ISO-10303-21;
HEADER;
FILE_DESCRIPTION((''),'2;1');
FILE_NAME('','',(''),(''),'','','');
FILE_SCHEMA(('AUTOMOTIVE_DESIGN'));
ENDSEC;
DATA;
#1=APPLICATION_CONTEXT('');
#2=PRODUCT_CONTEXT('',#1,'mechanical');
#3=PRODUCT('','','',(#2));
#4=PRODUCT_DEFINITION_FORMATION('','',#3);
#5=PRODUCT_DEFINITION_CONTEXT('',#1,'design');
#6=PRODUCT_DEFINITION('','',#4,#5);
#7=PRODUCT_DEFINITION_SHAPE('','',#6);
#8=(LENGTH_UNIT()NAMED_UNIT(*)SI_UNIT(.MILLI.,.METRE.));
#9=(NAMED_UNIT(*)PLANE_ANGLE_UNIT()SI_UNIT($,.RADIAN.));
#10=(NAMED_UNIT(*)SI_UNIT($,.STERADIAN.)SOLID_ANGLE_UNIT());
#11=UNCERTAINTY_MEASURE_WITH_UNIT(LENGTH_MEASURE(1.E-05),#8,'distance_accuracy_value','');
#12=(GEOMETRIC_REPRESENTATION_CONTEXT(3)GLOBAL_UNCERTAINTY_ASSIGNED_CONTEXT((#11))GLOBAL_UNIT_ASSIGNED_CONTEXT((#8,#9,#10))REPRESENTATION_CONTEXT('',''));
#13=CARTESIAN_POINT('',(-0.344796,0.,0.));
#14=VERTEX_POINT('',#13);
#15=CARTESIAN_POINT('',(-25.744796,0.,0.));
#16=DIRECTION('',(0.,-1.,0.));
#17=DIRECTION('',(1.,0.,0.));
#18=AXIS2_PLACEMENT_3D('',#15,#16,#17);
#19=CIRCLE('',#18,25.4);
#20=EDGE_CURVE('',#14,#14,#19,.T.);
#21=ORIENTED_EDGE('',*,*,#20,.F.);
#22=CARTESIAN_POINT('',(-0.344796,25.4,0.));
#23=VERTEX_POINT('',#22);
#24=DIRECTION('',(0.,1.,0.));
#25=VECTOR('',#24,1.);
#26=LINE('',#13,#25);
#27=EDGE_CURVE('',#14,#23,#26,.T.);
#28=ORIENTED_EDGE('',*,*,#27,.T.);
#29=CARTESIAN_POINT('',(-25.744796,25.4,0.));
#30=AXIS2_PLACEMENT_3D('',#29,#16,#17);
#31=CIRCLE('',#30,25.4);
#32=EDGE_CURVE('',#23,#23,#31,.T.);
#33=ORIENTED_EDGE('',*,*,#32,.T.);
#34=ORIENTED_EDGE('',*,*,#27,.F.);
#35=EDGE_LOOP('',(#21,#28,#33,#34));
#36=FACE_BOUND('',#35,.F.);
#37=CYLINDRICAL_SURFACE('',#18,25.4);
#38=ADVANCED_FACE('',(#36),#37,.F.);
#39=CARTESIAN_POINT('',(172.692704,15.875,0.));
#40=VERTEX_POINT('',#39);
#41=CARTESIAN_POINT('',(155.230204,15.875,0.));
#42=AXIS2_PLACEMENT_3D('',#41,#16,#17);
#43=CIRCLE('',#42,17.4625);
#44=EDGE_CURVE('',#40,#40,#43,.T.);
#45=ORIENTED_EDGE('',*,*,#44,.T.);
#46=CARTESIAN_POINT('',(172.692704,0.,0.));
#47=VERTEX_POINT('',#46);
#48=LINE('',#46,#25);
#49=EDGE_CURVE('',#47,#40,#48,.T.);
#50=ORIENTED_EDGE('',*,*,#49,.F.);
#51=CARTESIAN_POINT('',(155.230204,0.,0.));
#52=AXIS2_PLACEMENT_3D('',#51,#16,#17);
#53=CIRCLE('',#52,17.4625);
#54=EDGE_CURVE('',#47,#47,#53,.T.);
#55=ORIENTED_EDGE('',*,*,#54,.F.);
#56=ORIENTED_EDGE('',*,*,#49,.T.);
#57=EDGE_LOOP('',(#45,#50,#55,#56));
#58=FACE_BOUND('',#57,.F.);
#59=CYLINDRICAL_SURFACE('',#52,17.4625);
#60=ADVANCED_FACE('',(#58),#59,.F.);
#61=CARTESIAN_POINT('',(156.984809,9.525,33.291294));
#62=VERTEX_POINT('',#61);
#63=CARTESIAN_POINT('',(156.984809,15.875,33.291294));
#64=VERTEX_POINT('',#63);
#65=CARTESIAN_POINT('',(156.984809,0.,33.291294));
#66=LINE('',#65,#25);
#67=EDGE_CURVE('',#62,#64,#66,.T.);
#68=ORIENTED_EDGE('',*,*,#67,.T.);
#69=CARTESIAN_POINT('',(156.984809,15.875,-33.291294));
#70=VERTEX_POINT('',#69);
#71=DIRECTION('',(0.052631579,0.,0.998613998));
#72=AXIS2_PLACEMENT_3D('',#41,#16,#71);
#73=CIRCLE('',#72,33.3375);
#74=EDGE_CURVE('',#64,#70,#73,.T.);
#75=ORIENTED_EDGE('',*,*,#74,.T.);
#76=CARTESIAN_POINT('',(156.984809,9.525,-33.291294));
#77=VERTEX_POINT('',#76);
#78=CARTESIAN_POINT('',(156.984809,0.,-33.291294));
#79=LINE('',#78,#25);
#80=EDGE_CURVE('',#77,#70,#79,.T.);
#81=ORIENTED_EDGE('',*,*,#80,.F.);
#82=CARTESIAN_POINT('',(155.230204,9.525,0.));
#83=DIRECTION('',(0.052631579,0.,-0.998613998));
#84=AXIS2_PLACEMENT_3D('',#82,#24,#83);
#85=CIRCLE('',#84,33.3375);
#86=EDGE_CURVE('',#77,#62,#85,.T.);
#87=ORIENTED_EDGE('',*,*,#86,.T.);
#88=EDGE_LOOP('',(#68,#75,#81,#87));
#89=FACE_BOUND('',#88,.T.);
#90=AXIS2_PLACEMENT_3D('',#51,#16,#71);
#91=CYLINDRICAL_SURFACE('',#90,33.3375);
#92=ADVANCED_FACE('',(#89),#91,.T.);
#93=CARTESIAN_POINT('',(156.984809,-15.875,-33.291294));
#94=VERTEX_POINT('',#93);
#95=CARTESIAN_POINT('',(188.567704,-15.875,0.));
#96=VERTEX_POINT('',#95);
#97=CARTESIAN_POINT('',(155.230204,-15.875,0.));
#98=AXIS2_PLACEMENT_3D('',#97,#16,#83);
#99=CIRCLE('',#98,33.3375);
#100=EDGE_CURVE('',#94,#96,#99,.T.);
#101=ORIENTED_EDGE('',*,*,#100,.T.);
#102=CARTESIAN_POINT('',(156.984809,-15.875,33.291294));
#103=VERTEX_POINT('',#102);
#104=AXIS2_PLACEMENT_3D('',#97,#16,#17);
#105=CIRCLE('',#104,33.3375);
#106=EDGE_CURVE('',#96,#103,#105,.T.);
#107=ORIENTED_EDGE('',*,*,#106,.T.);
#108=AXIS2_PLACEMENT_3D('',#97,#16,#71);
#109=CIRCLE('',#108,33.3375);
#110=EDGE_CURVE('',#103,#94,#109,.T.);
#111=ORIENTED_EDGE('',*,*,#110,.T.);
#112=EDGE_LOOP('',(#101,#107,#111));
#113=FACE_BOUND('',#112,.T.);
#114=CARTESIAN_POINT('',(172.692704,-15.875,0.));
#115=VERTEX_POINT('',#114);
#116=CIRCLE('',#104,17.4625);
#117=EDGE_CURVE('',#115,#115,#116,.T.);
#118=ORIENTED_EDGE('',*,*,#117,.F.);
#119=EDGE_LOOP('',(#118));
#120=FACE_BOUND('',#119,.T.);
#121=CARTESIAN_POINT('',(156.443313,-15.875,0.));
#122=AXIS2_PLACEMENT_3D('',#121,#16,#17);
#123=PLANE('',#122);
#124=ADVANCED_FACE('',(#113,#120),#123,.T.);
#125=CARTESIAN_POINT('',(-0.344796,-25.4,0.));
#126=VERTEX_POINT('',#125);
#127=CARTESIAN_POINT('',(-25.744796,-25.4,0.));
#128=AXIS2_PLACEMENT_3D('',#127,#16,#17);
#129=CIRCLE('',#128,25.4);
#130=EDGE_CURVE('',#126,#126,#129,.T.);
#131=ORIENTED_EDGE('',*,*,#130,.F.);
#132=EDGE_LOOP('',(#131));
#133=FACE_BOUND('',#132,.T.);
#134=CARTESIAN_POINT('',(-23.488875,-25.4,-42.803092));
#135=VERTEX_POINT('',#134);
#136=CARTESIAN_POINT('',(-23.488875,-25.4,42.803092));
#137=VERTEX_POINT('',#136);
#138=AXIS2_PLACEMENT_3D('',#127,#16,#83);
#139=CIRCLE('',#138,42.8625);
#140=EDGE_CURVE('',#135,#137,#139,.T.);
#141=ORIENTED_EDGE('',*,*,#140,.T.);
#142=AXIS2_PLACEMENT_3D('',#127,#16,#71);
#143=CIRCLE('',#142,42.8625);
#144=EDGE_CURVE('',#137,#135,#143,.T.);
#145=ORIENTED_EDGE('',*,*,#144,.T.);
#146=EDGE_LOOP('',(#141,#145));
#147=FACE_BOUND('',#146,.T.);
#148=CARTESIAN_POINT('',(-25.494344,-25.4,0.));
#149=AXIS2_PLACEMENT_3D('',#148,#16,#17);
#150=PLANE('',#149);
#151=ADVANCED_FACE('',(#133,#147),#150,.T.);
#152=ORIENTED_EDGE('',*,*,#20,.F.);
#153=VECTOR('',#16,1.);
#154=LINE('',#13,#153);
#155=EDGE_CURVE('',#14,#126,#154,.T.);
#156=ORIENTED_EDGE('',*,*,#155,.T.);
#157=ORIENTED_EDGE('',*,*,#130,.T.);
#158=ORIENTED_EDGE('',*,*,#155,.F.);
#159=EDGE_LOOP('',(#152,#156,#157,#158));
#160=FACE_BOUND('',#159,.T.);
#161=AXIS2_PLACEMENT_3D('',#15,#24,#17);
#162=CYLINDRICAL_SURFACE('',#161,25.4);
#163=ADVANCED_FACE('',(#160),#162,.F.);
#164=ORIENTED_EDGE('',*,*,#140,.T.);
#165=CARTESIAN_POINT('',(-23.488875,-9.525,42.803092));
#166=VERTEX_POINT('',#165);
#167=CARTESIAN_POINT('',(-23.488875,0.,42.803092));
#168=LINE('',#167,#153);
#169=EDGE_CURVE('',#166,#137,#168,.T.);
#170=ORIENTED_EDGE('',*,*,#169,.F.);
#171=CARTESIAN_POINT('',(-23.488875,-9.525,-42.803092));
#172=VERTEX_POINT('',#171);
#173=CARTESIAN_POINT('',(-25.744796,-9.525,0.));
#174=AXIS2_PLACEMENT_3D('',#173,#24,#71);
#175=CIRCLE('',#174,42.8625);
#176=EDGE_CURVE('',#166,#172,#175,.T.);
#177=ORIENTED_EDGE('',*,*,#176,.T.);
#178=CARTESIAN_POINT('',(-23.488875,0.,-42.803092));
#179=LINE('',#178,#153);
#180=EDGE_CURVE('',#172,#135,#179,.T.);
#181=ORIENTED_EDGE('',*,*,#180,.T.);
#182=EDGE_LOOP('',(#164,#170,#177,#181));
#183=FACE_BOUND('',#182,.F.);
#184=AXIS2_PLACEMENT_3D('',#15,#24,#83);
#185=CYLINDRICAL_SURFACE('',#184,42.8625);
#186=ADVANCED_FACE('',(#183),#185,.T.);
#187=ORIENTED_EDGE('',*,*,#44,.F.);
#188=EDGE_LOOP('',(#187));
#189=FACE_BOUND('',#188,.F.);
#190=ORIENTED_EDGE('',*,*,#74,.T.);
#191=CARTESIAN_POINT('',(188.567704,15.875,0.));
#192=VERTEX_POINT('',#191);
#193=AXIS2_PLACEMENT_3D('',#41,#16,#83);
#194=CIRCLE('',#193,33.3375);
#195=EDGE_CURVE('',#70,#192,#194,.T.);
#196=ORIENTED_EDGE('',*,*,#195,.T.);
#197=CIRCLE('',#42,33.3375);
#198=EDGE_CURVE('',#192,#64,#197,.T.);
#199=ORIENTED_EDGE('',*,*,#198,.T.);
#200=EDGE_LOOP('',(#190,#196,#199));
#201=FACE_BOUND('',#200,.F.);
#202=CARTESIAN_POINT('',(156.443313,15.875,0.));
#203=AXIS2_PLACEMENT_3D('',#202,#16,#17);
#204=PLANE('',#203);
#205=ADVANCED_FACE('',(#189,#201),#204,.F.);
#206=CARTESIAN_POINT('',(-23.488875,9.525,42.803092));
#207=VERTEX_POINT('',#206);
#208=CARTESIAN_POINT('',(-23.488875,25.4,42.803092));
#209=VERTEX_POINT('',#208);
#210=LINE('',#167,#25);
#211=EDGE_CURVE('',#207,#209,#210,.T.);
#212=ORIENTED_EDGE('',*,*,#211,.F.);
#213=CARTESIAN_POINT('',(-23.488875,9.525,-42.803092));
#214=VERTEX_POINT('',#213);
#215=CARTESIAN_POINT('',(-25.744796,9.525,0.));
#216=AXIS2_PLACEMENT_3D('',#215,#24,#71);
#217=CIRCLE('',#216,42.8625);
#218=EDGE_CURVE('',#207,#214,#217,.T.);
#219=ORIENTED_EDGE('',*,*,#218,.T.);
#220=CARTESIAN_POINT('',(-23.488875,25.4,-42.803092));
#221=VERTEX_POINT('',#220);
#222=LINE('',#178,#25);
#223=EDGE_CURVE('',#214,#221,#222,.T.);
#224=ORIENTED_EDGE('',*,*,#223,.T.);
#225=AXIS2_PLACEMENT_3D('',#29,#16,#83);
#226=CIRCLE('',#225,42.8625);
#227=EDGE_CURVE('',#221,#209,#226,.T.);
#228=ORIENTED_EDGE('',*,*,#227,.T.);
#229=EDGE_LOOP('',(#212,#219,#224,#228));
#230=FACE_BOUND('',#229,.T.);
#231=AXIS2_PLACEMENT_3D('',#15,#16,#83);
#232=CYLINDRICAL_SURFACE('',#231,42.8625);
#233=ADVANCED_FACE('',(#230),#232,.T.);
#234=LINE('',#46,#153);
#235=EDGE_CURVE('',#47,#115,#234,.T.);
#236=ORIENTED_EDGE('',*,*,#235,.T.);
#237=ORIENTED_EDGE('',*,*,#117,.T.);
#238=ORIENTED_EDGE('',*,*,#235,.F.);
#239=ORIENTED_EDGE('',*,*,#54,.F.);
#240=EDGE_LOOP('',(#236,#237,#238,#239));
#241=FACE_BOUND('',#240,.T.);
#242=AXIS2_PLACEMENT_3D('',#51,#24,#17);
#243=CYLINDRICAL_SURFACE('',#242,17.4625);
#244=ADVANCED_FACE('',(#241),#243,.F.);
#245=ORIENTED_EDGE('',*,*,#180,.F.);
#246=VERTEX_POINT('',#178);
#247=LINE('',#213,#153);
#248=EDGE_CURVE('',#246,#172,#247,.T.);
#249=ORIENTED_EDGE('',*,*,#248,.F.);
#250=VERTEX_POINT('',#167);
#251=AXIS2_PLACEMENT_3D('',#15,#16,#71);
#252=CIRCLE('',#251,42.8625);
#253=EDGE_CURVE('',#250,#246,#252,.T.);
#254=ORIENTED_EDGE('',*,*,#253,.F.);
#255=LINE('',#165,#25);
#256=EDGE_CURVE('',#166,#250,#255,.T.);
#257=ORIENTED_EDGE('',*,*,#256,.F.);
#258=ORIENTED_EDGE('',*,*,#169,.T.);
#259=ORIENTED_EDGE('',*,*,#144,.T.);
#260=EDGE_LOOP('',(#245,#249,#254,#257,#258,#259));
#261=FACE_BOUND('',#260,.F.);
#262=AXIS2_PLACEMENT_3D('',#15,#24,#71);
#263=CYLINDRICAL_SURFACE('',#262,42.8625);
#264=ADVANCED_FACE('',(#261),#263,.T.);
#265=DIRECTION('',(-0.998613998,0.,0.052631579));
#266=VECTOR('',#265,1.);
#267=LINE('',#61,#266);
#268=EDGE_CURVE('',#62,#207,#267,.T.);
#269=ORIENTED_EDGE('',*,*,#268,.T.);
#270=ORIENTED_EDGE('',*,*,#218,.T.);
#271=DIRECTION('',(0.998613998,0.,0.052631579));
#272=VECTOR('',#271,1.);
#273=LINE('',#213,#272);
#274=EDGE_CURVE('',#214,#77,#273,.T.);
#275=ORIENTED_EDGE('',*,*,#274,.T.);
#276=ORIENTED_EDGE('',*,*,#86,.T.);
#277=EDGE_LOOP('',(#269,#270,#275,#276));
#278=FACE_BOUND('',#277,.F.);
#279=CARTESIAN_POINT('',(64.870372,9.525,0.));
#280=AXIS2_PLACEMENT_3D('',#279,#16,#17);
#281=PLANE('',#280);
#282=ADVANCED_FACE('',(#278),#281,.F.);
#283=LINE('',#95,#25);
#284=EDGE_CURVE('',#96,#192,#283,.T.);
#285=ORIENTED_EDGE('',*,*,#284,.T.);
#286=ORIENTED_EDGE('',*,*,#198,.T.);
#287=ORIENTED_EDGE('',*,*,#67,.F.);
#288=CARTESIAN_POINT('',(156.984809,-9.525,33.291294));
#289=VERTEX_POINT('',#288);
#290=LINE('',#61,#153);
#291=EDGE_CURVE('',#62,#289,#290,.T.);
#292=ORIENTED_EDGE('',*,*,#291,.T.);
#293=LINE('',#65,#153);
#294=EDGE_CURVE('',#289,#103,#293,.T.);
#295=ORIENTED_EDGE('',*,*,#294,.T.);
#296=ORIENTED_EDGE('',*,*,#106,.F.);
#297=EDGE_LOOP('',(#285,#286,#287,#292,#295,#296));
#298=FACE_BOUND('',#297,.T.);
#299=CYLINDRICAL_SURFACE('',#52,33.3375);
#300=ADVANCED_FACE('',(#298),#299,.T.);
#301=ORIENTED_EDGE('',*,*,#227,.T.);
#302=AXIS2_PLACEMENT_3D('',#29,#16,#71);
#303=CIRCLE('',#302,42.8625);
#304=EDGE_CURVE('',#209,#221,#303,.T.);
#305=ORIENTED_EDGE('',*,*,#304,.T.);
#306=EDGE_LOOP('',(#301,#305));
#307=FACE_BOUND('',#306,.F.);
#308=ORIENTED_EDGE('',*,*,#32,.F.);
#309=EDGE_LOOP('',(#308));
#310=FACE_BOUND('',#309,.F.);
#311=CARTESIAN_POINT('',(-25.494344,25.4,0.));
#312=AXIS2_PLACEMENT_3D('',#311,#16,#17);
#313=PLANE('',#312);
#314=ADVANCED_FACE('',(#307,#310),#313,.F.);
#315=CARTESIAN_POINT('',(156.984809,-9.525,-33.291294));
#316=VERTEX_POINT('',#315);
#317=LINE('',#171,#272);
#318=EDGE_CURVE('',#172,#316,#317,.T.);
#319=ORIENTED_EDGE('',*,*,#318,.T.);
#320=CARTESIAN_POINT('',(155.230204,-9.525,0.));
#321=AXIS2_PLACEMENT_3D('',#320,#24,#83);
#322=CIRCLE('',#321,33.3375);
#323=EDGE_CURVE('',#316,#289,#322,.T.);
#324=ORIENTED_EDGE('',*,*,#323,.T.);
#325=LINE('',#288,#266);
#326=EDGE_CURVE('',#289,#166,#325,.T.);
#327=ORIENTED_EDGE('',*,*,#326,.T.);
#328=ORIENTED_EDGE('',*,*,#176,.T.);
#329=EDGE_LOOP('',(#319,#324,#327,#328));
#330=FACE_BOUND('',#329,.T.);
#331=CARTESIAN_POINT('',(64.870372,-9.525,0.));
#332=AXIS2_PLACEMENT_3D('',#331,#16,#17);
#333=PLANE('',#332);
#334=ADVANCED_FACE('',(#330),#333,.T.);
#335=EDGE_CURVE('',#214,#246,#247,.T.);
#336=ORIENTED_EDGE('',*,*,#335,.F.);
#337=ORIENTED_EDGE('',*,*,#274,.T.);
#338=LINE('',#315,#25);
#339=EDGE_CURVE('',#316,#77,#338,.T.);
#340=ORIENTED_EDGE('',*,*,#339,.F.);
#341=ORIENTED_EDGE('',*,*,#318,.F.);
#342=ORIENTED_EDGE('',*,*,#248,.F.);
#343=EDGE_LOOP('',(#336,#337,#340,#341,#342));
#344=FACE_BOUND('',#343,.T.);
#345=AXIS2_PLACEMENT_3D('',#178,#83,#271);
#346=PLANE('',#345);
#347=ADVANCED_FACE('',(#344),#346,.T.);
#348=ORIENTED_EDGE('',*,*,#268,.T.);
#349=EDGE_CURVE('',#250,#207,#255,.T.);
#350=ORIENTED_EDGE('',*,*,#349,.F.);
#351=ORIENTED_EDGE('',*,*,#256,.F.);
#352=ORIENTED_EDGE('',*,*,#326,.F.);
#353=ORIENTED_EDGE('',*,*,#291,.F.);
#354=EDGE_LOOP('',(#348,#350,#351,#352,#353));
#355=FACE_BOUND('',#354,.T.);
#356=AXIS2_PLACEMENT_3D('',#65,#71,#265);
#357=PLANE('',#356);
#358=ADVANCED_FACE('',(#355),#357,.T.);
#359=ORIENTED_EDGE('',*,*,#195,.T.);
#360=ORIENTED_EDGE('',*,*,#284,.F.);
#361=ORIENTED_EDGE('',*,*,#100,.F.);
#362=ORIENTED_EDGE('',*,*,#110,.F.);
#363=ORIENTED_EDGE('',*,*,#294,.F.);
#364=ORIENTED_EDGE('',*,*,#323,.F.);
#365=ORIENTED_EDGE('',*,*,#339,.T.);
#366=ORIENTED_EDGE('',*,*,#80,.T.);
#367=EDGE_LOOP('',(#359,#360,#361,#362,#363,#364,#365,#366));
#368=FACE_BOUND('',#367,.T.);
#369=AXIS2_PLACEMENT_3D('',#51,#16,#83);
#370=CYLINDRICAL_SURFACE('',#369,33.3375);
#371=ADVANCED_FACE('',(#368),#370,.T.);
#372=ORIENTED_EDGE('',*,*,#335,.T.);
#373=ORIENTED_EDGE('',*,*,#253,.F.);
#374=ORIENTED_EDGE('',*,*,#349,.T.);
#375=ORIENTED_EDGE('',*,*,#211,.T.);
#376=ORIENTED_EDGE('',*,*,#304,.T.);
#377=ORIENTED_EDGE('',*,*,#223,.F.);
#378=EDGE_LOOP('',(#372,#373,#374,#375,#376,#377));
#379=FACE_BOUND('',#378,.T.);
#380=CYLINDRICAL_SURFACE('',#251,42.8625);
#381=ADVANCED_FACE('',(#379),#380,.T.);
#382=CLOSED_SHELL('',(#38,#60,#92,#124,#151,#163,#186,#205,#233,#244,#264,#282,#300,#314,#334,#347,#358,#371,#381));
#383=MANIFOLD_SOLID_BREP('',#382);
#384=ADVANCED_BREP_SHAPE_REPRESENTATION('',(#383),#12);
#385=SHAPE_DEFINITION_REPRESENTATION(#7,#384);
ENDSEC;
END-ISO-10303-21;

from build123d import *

# Parameters (mm, degrees)
F1_DEPTH = 9.525
F0_R     = 25.4
F2_DEPTH = 25.4
F0_R_2   = 17.4625
F3_DEPTH = 15.875


with BuildPart() as f1:
    # F0 (on Front) → F1 (new body, symmetric)
    with BuildSketch(Plane.XZ):
        with BuildLine():
            ThreePointArc((-23.4888751152, 42.803092487), (5.3509296025, 29.4999956791), (17.1177038322, 0))
            ThreePointArc((17.1177038322, 0), (5.3509296025, -29.4999956791), (-23.4888751152, -42.803092487))
            Line((-23.4888751152, -42.803092487), (156.9848090954, -33.2912941566))
            ThreePointArc((156.9848090954, -33.2912941566), (121.8927038322, 0), (156.9848090954, 33.2912941566))
            Line((156.9848090954, 33.2912941566), (-23.4888751152, 42.803092487))
        make_face()
    extrude(amount=F1_DEPTH, both=True)

    # F0 (on Front) → F2 (join, symmetric)
    with BuildSketch(Plane.XZ):
        with BuildLine():
            ThreePointArc((-23.4888751152, -42.803092487), (5.3509296025, -29.4999956791), (17.1177038322, 0))
            ThreePointArc((17.1177038322, 0), (5.3509296025, 29.4999956791), (-23.4888751152, 42.803092487))
            ThreePointArc((-23.4888751152, 42.803092487), (-68.6072961678, 0), (-23.4888751152, -42.803092487))
        make_face()
        with Locations((-25.7447961678, 0)):
            Circle(F0_R, mode=Mode.SUBTRACT)
    extrude(amount=F2_DEPTH, both=True)

    # F0 (on Front) → F3 (join, symmetric)
    with BuildSketch(Plane.XZ):
        with BuildLine():
            ThreePointArc((188.5677038322, 0), (179.4157683202, 22.9444410837), (156.9848090954, 33.2912941566))
            ThreePointArc((156.9848090954, 33.2912941566), (121.8927038322, 0), (156.9848090954, -33.2912941566))
            ThreePointArc((156.9848090954, -33.2912941566), (179.4157683202, -22.9444410837), (188.5677038322, 0))
        make_face()
        with Locations((155.2302038322, 0)):
            Circle(F0_R_2, mode=Mode.SUBTRACT)
    extrude(amount=F3_DEPTH, both=True)


solid = f1.part
